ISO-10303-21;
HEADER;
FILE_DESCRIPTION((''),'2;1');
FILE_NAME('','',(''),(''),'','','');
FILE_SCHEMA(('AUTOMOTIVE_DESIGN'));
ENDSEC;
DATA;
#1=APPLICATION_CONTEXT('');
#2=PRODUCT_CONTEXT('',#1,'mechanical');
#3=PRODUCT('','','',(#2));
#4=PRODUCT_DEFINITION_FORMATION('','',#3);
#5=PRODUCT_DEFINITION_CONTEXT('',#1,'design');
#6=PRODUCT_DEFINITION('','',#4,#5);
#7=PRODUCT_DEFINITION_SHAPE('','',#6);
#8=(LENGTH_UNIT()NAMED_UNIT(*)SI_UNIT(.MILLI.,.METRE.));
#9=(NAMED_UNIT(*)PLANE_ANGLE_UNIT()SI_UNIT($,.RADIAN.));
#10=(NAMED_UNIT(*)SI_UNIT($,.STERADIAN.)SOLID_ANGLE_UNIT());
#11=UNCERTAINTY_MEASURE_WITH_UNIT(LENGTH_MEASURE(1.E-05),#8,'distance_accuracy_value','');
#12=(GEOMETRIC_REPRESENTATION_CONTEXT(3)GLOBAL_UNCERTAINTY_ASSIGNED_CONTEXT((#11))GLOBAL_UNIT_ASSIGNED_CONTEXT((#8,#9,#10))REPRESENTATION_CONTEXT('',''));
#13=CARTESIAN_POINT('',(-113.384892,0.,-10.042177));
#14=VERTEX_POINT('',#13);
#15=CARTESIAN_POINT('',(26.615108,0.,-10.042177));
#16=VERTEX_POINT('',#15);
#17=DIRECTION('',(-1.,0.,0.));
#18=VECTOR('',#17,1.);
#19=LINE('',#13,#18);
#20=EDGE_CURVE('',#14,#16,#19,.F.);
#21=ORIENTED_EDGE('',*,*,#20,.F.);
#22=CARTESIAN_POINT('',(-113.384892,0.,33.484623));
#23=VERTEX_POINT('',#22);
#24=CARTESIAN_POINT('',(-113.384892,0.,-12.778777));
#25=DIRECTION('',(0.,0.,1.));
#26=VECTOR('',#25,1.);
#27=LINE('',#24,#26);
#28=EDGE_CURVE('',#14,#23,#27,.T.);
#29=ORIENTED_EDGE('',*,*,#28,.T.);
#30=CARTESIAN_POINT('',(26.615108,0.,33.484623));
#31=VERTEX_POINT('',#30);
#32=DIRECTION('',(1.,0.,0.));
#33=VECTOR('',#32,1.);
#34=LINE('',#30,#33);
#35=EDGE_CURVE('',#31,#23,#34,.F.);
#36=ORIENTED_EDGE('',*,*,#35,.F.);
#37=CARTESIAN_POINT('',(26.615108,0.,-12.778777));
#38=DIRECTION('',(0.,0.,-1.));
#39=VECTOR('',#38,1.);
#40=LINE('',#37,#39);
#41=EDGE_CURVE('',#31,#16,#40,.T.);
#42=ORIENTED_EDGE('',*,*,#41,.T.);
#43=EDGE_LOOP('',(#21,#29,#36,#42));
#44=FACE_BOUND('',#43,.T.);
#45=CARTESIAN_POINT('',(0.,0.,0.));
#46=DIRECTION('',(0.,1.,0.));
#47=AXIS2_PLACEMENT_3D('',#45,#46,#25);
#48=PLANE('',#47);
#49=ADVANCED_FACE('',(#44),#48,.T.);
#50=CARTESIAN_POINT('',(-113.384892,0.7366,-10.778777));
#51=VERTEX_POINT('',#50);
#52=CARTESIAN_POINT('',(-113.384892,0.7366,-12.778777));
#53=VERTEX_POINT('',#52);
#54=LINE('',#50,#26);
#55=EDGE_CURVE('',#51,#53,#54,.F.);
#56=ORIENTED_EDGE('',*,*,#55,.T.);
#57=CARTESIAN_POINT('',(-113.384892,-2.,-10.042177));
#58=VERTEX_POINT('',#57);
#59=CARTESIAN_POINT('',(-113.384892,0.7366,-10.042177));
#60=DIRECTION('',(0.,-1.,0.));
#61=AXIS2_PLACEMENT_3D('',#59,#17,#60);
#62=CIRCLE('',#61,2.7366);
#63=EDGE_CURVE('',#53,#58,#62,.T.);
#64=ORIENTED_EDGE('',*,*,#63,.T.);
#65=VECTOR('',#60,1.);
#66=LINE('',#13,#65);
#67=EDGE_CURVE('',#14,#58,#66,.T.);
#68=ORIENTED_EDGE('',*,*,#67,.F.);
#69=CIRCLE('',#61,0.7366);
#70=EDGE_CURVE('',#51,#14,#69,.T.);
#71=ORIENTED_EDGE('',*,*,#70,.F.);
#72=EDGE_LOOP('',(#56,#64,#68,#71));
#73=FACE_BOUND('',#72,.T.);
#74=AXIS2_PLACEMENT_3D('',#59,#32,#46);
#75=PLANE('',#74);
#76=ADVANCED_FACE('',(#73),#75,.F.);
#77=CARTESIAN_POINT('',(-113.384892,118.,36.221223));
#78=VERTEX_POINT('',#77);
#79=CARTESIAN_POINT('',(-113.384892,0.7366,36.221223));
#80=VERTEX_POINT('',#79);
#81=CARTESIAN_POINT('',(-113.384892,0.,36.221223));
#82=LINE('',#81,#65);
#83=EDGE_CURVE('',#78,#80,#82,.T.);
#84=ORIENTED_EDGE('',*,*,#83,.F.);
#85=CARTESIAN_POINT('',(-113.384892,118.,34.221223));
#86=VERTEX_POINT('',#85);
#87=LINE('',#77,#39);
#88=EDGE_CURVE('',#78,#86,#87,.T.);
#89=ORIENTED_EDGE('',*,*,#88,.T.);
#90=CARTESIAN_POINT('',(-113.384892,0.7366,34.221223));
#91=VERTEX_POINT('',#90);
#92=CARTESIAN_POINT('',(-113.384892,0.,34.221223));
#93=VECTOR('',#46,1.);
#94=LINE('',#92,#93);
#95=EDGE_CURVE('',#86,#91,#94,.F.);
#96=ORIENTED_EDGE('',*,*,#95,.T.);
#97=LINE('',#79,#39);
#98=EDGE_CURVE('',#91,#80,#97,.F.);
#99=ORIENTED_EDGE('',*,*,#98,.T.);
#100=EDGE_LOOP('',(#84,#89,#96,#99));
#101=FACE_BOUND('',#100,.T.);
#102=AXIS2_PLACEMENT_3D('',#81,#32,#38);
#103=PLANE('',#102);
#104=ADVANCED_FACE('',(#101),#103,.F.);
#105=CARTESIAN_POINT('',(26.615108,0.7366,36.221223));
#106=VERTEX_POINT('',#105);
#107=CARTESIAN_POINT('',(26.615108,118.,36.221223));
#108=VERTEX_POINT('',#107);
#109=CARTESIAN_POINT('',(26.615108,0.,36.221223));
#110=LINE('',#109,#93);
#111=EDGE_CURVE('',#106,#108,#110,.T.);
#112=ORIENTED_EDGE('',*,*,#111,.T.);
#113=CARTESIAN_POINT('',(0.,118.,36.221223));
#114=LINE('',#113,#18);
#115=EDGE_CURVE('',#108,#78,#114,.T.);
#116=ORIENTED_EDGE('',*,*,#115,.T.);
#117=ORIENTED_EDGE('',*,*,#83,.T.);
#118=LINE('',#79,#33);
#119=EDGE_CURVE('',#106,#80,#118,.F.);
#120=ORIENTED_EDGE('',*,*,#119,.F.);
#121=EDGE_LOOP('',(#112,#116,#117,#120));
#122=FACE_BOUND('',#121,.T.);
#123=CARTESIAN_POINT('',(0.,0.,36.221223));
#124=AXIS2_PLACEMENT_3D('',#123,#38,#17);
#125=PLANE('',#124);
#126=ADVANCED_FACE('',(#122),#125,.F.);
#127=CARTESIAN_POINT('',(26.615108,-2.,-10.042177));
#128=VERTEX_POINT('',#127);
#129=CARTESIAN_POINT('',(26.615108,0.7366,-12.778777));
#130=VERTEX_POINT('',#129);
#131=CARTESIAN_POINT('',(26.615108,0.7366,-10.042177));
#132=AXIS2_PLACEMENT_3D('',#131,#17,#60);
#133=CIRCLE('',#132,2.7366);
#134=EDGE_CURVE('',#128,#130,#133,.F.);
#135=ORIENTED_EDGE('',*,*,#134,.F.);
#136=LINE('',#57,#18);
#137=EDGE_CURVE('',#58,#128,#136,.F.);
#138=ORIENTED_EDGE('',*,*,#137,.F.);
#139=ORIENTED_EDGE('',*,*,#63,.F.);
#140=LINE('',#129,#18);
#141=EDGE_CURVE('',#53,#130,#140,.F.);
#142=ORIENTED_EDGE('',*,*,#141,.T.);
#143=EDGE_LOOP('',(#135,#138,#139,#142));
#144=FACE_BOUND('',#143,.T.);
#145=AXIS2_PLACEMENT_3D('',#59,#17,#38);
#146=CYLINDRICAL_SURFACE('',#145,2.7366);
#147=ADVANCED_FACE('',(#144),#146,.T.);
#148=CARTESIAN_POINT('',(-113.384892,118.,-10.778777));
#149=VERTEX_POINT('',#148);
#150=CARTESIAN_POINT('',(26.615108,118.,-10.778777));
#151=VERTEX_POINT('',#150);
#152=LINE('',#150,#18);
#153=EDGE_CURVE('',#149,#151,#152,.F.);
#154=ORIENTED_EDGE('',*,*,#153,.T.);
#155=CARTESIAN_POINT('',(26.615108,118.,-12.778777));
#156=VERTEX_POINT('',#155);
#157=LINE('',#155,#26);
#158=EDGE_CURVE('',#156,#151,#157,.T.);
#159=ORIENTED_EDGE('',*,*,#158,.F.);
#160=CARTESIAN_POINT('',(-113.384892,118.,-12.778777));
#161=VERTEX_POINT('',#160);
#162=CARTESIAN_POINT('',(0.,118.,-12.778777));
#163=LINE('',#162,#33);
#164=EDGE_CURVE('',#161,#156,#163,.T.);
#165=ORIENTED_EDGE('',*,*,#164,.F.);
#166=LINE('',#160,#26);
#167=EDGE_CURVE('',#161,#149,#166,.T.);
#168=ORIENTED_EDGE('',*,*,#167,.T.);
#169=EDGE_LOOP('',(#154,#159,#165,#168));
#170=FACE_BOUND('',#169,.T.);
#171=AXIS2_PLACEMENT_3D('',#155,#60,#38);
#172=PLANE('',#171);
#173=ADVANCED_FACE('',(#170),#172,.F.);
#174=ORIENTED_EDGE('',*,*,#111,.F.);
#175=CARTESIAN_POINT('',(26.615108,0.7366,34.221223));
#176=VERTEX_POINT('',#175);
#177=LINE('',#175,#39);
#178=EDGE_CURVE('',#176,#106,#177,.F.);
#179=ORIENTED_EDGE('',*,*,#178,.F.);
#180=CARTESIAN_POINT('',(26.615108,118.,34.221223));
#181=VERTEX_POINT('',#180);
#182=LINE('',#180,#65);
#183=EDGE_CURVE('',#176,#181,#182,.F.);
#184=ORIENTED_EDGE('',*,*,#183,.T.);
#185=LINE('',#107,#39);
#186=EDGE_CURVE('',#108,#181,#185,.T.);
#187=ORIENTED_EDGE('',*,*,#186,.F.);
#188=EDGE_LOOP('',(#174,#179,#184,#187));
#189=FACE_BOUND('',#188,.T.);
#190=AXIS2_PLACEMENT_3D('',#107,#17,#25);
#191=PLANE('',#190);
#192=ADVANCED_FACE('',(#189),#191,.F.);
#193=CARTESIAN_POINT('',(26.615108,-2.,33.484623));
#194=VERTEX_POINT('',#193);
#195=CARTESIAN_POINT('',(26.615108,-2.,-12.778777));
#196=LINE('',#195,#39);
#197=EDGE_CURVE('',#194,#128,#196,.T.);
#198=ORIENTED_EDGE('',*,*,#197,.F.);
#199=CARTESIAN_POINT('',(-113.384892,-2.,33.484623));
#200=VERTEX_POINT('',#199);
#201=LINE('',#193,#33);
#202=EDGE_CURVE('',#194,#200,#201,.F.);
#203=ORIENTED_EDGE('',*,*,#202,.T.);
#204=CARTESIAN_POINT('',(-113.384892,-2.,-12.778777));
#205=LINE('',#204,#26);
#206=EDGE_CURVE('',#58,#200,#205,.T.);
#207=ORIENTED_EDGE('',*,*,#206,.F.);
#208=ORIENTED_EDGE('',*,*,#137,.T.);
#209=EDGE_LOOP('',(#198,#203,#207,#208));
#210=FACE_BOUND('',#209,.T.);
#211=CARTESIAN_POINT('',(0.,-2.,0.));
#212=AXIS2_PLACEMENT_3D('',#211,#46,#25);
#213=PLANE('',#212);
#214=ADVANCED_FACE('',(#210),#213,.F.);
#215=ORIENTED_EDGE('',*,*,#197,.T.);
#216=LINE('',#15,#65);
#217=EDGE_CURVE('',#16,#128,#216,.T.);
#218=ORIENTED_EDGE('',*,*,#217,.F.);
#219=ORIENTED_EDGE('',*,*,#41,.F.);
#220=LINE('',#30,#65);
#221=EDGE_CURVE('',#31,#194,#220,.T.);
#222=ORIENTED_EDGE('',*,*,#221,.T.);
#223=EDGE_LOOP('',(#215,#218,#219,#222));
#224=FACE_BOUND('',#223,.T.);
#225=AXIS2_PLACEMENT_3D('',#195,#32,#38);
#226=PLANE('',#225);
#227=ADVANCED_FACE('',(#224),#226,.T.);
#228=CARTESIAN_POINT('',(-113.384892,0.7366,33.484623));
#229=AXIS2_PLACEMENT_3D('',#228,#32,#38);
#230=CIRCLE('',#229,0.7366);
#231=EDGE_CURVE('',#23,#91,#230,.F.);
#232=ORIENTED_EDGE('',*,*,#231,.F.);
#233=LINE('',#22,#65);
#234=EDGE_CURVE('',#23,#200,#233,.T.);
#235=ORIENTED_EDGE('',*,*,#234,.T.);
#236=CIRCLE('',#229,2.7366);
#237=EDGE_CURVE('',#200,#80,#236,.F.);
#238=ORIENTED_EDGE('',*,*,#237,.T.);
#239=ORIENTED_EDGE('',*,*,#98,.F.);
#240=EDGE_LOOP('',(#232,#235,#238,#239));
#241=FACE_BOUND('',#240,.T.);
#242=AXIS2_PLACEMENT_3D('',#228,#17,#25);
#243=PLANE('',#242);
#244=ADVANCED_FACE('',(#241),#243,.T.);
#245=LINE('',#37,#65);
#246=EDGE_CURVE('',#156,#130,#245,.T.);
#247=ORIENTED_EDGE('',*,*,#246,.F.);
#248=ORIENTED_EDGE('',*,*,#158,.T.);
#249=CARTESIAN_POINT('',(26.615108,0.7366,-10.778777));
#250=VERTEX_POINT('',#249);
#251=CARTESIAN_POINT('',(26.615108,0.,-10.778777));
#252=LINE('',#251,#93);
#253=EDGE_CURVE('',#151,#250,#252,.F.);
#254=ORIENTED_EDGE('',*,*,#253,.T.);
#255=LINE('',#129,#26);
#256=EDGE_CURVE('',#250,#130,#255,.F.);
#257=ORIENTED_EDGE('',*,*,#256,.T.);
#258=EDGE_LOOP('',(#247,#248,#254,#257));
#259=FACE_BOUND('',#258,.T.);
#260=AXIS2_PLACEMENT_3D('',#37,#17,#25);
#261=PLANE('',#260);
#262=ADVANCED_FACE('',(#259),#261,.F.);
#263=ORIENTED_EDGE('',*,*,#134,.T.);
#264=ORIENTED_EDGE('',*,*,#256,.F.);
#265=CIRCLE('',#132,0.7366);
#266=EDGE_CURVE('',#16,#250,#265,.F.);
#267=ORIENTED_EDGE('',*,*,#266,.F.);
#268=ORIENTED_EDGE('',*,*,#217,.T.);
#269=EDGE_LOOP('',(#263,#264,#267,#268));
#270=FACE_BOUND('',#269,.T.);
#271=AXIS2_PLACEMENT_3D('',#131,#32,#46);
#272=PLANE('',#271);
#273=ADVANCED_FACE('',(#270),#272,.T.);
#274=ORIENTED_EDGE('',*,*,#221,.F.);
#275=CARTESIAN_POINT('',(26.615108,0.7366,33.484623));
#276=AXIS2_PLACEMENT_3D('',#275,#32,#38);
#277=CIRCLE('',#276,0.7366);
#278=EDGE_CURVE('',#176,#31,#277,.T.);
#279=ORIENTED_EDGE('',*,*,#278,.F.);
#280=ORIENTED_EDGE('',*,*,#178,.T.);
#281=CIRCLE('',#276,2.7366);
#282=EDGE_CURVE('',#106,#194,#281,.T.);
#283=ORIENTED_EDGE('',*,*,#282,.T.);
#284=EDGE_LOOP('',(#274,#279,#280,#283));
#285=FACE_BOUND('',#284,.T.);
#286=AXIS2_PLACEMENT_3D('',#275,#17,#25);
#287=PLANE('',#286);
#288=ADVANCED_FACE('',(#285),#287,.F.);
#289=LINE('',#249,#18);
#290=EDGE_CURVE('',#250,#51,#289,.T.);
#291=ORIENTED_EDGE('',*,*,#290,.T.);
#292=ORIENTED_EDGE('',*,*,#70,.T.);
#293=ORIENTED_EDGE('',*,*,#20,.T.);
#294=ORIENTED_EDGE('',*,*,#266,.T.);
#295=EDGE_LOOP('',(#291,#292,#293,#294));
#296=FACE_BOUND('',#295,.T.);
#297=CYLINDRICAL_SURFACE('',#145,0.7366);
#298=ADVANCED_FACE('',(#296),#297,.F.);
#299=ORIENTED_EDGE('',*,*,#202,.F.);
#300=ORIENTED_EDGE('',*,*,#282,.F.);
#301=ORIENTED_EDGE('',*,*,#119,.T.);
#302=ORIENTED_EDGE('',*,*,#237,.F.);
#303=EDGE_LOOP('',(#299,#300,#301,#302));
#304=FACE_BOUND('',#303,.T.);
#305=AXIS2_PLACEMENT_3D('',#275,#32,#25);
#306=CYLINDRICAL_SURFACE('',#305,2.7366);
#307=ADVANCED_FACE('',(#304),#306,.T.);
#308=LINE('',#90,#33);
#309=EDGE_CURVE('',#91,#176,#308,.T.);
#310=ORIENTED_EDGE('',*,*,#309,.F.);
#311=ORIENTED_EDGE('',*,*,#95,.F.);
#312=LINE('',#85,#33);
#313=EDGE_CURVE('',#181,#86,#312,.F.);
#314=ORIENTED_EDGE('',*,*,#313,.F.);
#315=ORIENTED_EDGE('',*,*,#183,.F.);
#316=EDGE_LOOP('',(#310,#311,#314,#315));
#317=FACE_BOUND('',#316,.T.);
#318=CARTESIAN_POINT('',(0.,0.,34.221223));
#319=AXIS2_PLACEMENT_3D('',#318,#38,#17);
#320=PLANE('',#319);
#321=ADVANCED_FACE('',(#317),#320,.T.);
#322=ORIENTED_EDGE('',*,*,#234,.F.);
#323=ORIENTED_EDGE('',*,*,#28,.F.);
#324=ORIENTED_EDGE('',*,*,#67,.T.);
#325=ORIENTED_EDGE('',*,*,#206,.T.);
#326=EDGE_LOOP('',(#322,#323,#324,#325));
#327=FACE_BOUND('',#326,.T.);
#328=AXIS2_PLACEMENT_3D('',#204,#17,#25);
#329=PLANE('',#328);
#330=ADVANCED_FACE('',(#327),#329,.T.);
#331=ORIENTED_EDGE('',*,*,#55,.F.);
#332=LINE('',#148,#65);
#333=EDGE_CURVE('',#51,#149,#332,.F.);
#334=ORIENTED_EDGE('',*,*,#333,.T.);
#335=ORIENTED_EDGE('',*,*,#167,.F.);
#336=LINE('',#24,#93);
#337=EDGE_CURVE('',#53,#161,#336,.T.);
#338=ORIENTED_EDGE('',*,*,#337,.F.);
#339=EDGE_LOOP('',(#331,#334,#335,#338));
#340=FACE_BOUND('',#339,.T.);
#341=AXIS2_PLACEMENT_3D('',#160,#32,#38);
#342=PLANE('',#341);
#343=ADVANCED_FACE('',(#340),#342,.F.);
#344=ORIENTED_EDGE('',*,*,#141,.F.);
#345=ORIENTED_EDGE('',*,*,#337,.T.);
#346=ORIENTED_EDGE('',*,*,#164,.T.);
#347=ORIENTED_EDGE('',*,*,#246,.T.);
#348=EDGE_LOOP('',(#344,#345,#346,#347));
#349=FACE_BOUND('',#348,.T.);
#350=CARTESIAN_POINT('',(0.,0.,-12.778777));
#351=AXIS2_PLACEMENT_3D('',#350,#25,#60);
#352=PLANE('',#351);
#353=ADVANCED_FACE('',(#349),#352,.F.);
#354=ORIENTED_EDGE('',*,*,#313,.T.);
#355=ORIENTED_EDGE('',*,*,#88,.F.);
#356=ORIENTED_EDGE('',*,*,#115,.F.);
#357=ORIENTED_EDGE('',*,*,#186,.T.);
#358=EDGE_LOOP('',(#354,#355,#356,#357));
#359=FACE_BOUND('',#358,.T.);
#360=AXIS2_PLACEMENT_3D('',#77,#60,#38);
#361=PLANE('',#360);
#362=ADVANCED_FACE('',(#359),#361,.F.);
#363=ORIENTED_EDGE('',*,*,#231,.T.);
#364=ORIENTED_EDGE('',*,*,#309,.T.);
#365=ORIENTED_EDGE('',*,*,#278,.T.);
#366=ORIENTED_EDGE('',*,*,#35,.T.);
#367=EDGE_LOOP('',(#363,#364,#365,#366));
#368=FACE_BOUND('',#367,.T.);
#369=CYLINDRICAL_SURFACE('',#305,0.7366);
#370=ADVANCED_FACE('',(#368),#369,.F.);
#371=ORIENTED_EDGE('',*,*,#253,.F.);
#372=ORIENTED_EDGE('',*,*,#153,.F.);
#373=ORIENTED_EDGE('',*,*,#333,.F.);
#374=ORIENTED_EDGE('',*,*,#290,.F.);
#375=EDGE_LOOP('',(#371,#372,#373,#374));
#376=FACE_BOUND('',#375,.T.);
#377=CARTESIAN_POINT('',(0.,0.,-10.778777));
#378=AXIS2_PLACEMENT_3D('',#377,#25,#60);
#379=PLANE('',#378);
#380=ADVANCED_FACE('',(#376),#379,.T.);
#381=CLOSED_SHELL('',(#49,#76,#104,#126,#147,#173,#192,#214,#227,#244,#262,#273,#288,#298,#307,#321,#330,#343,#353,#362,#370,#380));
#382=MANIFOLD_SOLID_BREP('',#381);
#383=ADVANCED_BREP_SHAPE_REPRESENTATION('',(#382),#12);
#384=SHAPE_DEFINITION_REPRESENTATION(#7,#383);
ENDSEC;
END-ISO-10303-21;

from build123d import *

# Parameters (mm, degrees)
SKETCH1_W                      = 140
SKETCH1_H                      = 49
BASE_FLANGE1_DEPTH             = 2
EDGE_FLANGE1_STRIP_W           = 9.4732
EDGE_FLANGE1_STRIP_H           = 2
EDGE_FLANGE1_STRIP_CUT_DEPTH   = 140
EDGE_FLANGE1_STRIP_2_W         = 9.4732
EDGE_FLANGE1_STRIP_2_H         = 2
EDGE_FLANGE1_STRIP_CUT_2_DEPTH = 140
EDGE_FLANGE1_DEPTH             = 140
EDGE_FLANGE1_BEND_DEPTH        = 140


# Sheet-metal steps are written as plain solids
with BuildPart() as part:
    # Sketch1 → Base-Flange1 (new body)
    with BuildSketch(Plane(origin=(0, 0, 0), x_dir=(1, 0, 0), z_dir=(0, 1, 0))):
        with Locations((-43.384892086, -11.721223022)):
            Rectangle(SKETCH1_W, SKETCH1_H)
    extrude(amount=-BASE_FLANGE1_DEPTH)

    # Edge-Flange1 strip (across the edge) → Edge-Flange1 strip cut (cut)
    with BuildSketch(Plane(origin=(26.615107914, 0, -12.778776978), x_dir=(0, 0, 1), z_dir=(-1, 0, 0))):
        with Locations((-2, -1)):
            Rectangle(EDGE_FLANGE1_STRIP_W, EDGE_FLANGE1_STRIP_H)
    extrude(amount=EDGE_FLANGE1_STRIP_CUT_DEPTH, mode=Mode.SUBTRACT)

    # Edge-Flange1 strip 2 (across the edge) → Edge-Flange1 strip cut 2 (cut)
    with BuildSketch(Plane(origin=(-113.384892086, 0, 36.221223022), x_dir=(0, 0, -1), z_dir=(1, 0, 0))):
        with Locations((-2, -1)):
            Rectangle(EDGE_FLANGE1_STRIP_2_W, EDGE_FLANGE1_STRIP_2_H)
    extrude(amount=EDGE_FLANGE1_STRIP_CUT_2_DEPTH, mode=Mode.SUBTRACT)

    # Edge-Flange1 section (across the edge) → Edge-Flange1 (add)
    with BuildSketch(Plane(origin=(26.615107914, 0, -12.778776978), x_dir=(0, 0, 1), z_dir=(-1, 0, 0))):
        with BuildLine():
            Line((0, 0.7366), (0, 118))
            Line((0, 118), (2, 118))
            Line((2, 118), (2, 0.7366))
            ThreePointArc((2, 0.7366), (2.215745145, 0.215745145), (2.7366, 0))
            Line((2.7366, 0), (2.7366, -2))
            ThreePointArc((2.7366, -2), (0.801531583, -1.198468417), (0, 0.7366))
        make_face()
    extrude(amount=EDGE_FLANGE1_DEPTH)

    # Edge-Flange1 section 2 (across the edge) → Edge-Flange1 bend (add)
    with BuildSketch(Plane(origin=(-113.384892086, 0, 36.221223022), x_dir=(0, 0, -1), z_dir=(1, 0, 0))):
        with BuildLine():
            Line((0, 0.7366), (0, 118))
            Line((0, 118), (2, 118))
            Line((2, 118), (2, 0.7366))
            ThreePointArc((2, 0.7366), (2.215745145, 0.215745145), (2.7366, 0))
            Line((2.7366, 0), (2.7366, -2))
            ThreePointArc((2.7366, -2), (0.801531583, -1.198468417), (0, 0.7366))
        make_face()
    extrude(amount=EDGE_FLANGE1_BEND_DEPTH)


solid = part.part
